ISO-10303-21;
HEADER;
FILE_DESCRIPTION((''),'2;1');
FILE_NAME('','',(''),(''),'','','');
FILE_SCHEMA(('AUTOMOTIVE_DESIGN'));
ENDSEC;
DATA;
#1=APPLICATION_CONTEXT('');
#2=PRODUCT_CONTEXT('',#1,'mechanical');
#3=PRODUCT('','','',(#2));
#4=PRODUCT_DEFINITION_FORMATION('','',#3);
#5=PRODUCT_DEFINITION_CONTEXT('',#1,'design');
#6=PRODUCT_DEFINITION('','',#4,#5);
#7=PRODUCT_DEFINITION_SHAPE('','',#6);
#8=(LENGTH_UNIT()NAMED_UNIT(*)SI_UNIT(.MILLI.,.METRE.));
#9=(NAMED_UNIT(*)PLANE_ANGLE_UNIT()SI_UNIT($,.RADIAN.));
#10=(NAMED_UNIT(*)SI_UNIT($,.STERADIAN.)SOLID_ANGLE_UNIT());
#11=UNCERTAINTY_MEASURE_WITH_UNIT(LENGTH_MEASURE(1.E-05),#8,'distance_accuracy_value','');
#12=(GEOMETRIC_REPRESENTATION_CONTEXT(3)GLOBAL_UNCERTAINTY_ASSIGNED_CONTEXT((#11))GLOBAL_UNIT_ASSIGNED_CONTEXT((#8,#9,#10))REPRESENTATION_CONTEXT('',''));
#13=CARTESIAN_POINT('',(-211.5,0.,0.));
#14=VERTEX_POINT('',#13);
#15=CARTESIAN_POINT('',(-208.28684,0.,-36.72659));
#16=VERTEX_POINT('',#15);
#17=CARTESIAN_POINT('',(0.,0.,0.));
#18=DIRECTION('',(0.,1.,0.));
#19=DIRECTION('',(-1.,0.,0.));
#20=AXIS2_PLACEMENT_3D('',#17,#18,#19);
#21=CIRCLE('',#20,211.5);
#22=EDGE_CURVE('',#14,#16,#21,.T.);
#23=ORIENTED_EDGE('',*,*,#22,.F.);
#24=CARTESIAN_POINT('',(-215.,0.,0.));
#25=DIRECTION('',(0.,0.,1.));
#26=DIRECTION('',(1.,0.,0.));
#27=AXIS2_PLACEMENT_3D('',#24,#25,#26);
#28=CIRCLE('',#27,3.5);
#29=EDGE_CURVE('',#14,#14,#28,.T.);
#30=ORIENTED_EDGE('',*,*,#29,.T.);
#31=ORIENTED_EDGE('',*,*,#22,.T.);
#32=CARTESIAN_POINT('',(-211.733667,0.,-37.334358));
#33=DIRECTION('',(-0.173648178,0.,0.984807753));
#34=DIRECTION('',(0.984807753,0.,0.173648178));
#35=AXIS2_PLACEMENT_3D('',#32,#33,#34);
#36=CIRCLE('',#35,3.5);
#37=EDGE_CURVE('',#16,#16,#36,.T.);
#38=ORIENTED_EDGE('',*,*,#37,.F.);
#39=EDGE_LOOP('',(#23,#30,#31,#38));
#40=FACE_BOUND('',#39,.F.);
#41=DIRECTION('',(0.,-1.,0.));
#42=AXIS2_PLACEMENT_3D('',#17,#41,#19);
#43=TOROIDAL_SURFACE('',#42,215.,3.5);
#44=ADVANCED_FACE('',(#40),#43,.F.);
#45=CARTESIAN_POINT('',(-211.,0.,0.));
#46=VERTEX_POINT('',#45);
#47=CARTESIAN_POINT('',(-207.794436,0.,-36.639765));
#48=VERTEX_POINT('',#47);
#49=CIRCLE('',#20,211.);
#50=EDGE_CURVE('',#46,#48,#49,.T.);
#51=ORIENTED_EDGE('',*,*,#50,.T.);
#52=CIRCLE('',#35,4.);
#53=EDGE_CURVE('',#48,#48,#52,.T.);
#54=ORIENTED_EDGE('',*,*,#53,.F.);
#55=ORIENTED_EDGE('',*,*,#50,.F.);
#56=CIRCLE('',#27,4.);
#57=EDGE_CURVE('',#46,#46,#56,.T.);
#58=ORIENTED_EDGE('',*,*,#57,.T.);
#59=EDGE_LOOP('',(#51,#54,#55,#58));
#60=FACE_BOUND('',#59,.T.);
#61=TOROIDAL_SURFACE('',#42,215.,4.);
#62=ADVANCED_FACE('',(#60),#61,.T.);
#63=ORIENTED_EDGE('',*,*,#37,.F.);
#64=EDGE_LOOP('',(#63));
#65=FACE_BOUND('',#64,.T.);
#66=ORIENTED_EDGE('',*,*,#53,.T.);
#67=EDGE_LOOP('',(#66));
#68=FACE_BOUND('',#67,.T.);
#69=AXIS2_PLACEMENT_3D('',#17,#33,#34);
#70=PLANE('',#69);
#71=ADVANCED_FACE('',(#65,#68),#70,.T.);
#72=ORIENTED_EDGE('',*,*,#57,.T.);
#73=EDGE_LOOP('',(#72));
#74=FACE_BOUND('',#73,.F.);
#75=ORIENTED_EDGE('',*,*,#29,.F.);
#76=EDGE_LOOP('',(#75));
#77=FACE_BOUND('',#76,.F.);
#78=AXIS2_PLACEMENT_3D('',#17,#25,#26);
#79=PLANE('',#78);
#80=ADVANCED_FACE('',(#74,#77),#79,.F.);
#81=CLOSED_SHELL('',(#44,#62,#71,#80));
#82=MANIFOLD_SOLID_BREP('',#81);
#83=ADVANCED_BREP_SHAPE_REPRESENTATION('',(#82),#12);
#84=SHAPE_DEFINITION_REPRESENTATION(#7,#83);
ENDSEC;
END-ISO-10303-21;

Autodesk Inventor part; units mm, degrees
ref_plane "YZ Plane" through (0, 0, 0) normal (1, 0, 0) x (0, 1, 0)
ref_plane "XZ Plane" through (0, 0, 0) normal (0, 1, 0) x (-1, 0, 0)
ref_plane "XY Plane" through (0, 0, 0) normal (0, 0, 1) x (1, 0, 0)
sketch "Sketch1" plane through (0, 0, 0) normal (0, 0, 1) x (1, 0, 0)
  circle A0 centre (-215, 0) radius 4
  circle A1 centre (-215, 0) radius 3.5
  line L0 (0, 42.2288) -> (0, -42.2288)
  point P0 (0, 0)
  point P1 (0, 0)
  dimension "d0" = 8
  dimension "d1" = 7
  dimension "d2" = 215
revolve "Revolution1" add sketch "Sketch1" angle 350 about axis through (0, 42.2288, 0) along (0, 1, 0)
properties part number "Strike_Rail" material "Copper"
